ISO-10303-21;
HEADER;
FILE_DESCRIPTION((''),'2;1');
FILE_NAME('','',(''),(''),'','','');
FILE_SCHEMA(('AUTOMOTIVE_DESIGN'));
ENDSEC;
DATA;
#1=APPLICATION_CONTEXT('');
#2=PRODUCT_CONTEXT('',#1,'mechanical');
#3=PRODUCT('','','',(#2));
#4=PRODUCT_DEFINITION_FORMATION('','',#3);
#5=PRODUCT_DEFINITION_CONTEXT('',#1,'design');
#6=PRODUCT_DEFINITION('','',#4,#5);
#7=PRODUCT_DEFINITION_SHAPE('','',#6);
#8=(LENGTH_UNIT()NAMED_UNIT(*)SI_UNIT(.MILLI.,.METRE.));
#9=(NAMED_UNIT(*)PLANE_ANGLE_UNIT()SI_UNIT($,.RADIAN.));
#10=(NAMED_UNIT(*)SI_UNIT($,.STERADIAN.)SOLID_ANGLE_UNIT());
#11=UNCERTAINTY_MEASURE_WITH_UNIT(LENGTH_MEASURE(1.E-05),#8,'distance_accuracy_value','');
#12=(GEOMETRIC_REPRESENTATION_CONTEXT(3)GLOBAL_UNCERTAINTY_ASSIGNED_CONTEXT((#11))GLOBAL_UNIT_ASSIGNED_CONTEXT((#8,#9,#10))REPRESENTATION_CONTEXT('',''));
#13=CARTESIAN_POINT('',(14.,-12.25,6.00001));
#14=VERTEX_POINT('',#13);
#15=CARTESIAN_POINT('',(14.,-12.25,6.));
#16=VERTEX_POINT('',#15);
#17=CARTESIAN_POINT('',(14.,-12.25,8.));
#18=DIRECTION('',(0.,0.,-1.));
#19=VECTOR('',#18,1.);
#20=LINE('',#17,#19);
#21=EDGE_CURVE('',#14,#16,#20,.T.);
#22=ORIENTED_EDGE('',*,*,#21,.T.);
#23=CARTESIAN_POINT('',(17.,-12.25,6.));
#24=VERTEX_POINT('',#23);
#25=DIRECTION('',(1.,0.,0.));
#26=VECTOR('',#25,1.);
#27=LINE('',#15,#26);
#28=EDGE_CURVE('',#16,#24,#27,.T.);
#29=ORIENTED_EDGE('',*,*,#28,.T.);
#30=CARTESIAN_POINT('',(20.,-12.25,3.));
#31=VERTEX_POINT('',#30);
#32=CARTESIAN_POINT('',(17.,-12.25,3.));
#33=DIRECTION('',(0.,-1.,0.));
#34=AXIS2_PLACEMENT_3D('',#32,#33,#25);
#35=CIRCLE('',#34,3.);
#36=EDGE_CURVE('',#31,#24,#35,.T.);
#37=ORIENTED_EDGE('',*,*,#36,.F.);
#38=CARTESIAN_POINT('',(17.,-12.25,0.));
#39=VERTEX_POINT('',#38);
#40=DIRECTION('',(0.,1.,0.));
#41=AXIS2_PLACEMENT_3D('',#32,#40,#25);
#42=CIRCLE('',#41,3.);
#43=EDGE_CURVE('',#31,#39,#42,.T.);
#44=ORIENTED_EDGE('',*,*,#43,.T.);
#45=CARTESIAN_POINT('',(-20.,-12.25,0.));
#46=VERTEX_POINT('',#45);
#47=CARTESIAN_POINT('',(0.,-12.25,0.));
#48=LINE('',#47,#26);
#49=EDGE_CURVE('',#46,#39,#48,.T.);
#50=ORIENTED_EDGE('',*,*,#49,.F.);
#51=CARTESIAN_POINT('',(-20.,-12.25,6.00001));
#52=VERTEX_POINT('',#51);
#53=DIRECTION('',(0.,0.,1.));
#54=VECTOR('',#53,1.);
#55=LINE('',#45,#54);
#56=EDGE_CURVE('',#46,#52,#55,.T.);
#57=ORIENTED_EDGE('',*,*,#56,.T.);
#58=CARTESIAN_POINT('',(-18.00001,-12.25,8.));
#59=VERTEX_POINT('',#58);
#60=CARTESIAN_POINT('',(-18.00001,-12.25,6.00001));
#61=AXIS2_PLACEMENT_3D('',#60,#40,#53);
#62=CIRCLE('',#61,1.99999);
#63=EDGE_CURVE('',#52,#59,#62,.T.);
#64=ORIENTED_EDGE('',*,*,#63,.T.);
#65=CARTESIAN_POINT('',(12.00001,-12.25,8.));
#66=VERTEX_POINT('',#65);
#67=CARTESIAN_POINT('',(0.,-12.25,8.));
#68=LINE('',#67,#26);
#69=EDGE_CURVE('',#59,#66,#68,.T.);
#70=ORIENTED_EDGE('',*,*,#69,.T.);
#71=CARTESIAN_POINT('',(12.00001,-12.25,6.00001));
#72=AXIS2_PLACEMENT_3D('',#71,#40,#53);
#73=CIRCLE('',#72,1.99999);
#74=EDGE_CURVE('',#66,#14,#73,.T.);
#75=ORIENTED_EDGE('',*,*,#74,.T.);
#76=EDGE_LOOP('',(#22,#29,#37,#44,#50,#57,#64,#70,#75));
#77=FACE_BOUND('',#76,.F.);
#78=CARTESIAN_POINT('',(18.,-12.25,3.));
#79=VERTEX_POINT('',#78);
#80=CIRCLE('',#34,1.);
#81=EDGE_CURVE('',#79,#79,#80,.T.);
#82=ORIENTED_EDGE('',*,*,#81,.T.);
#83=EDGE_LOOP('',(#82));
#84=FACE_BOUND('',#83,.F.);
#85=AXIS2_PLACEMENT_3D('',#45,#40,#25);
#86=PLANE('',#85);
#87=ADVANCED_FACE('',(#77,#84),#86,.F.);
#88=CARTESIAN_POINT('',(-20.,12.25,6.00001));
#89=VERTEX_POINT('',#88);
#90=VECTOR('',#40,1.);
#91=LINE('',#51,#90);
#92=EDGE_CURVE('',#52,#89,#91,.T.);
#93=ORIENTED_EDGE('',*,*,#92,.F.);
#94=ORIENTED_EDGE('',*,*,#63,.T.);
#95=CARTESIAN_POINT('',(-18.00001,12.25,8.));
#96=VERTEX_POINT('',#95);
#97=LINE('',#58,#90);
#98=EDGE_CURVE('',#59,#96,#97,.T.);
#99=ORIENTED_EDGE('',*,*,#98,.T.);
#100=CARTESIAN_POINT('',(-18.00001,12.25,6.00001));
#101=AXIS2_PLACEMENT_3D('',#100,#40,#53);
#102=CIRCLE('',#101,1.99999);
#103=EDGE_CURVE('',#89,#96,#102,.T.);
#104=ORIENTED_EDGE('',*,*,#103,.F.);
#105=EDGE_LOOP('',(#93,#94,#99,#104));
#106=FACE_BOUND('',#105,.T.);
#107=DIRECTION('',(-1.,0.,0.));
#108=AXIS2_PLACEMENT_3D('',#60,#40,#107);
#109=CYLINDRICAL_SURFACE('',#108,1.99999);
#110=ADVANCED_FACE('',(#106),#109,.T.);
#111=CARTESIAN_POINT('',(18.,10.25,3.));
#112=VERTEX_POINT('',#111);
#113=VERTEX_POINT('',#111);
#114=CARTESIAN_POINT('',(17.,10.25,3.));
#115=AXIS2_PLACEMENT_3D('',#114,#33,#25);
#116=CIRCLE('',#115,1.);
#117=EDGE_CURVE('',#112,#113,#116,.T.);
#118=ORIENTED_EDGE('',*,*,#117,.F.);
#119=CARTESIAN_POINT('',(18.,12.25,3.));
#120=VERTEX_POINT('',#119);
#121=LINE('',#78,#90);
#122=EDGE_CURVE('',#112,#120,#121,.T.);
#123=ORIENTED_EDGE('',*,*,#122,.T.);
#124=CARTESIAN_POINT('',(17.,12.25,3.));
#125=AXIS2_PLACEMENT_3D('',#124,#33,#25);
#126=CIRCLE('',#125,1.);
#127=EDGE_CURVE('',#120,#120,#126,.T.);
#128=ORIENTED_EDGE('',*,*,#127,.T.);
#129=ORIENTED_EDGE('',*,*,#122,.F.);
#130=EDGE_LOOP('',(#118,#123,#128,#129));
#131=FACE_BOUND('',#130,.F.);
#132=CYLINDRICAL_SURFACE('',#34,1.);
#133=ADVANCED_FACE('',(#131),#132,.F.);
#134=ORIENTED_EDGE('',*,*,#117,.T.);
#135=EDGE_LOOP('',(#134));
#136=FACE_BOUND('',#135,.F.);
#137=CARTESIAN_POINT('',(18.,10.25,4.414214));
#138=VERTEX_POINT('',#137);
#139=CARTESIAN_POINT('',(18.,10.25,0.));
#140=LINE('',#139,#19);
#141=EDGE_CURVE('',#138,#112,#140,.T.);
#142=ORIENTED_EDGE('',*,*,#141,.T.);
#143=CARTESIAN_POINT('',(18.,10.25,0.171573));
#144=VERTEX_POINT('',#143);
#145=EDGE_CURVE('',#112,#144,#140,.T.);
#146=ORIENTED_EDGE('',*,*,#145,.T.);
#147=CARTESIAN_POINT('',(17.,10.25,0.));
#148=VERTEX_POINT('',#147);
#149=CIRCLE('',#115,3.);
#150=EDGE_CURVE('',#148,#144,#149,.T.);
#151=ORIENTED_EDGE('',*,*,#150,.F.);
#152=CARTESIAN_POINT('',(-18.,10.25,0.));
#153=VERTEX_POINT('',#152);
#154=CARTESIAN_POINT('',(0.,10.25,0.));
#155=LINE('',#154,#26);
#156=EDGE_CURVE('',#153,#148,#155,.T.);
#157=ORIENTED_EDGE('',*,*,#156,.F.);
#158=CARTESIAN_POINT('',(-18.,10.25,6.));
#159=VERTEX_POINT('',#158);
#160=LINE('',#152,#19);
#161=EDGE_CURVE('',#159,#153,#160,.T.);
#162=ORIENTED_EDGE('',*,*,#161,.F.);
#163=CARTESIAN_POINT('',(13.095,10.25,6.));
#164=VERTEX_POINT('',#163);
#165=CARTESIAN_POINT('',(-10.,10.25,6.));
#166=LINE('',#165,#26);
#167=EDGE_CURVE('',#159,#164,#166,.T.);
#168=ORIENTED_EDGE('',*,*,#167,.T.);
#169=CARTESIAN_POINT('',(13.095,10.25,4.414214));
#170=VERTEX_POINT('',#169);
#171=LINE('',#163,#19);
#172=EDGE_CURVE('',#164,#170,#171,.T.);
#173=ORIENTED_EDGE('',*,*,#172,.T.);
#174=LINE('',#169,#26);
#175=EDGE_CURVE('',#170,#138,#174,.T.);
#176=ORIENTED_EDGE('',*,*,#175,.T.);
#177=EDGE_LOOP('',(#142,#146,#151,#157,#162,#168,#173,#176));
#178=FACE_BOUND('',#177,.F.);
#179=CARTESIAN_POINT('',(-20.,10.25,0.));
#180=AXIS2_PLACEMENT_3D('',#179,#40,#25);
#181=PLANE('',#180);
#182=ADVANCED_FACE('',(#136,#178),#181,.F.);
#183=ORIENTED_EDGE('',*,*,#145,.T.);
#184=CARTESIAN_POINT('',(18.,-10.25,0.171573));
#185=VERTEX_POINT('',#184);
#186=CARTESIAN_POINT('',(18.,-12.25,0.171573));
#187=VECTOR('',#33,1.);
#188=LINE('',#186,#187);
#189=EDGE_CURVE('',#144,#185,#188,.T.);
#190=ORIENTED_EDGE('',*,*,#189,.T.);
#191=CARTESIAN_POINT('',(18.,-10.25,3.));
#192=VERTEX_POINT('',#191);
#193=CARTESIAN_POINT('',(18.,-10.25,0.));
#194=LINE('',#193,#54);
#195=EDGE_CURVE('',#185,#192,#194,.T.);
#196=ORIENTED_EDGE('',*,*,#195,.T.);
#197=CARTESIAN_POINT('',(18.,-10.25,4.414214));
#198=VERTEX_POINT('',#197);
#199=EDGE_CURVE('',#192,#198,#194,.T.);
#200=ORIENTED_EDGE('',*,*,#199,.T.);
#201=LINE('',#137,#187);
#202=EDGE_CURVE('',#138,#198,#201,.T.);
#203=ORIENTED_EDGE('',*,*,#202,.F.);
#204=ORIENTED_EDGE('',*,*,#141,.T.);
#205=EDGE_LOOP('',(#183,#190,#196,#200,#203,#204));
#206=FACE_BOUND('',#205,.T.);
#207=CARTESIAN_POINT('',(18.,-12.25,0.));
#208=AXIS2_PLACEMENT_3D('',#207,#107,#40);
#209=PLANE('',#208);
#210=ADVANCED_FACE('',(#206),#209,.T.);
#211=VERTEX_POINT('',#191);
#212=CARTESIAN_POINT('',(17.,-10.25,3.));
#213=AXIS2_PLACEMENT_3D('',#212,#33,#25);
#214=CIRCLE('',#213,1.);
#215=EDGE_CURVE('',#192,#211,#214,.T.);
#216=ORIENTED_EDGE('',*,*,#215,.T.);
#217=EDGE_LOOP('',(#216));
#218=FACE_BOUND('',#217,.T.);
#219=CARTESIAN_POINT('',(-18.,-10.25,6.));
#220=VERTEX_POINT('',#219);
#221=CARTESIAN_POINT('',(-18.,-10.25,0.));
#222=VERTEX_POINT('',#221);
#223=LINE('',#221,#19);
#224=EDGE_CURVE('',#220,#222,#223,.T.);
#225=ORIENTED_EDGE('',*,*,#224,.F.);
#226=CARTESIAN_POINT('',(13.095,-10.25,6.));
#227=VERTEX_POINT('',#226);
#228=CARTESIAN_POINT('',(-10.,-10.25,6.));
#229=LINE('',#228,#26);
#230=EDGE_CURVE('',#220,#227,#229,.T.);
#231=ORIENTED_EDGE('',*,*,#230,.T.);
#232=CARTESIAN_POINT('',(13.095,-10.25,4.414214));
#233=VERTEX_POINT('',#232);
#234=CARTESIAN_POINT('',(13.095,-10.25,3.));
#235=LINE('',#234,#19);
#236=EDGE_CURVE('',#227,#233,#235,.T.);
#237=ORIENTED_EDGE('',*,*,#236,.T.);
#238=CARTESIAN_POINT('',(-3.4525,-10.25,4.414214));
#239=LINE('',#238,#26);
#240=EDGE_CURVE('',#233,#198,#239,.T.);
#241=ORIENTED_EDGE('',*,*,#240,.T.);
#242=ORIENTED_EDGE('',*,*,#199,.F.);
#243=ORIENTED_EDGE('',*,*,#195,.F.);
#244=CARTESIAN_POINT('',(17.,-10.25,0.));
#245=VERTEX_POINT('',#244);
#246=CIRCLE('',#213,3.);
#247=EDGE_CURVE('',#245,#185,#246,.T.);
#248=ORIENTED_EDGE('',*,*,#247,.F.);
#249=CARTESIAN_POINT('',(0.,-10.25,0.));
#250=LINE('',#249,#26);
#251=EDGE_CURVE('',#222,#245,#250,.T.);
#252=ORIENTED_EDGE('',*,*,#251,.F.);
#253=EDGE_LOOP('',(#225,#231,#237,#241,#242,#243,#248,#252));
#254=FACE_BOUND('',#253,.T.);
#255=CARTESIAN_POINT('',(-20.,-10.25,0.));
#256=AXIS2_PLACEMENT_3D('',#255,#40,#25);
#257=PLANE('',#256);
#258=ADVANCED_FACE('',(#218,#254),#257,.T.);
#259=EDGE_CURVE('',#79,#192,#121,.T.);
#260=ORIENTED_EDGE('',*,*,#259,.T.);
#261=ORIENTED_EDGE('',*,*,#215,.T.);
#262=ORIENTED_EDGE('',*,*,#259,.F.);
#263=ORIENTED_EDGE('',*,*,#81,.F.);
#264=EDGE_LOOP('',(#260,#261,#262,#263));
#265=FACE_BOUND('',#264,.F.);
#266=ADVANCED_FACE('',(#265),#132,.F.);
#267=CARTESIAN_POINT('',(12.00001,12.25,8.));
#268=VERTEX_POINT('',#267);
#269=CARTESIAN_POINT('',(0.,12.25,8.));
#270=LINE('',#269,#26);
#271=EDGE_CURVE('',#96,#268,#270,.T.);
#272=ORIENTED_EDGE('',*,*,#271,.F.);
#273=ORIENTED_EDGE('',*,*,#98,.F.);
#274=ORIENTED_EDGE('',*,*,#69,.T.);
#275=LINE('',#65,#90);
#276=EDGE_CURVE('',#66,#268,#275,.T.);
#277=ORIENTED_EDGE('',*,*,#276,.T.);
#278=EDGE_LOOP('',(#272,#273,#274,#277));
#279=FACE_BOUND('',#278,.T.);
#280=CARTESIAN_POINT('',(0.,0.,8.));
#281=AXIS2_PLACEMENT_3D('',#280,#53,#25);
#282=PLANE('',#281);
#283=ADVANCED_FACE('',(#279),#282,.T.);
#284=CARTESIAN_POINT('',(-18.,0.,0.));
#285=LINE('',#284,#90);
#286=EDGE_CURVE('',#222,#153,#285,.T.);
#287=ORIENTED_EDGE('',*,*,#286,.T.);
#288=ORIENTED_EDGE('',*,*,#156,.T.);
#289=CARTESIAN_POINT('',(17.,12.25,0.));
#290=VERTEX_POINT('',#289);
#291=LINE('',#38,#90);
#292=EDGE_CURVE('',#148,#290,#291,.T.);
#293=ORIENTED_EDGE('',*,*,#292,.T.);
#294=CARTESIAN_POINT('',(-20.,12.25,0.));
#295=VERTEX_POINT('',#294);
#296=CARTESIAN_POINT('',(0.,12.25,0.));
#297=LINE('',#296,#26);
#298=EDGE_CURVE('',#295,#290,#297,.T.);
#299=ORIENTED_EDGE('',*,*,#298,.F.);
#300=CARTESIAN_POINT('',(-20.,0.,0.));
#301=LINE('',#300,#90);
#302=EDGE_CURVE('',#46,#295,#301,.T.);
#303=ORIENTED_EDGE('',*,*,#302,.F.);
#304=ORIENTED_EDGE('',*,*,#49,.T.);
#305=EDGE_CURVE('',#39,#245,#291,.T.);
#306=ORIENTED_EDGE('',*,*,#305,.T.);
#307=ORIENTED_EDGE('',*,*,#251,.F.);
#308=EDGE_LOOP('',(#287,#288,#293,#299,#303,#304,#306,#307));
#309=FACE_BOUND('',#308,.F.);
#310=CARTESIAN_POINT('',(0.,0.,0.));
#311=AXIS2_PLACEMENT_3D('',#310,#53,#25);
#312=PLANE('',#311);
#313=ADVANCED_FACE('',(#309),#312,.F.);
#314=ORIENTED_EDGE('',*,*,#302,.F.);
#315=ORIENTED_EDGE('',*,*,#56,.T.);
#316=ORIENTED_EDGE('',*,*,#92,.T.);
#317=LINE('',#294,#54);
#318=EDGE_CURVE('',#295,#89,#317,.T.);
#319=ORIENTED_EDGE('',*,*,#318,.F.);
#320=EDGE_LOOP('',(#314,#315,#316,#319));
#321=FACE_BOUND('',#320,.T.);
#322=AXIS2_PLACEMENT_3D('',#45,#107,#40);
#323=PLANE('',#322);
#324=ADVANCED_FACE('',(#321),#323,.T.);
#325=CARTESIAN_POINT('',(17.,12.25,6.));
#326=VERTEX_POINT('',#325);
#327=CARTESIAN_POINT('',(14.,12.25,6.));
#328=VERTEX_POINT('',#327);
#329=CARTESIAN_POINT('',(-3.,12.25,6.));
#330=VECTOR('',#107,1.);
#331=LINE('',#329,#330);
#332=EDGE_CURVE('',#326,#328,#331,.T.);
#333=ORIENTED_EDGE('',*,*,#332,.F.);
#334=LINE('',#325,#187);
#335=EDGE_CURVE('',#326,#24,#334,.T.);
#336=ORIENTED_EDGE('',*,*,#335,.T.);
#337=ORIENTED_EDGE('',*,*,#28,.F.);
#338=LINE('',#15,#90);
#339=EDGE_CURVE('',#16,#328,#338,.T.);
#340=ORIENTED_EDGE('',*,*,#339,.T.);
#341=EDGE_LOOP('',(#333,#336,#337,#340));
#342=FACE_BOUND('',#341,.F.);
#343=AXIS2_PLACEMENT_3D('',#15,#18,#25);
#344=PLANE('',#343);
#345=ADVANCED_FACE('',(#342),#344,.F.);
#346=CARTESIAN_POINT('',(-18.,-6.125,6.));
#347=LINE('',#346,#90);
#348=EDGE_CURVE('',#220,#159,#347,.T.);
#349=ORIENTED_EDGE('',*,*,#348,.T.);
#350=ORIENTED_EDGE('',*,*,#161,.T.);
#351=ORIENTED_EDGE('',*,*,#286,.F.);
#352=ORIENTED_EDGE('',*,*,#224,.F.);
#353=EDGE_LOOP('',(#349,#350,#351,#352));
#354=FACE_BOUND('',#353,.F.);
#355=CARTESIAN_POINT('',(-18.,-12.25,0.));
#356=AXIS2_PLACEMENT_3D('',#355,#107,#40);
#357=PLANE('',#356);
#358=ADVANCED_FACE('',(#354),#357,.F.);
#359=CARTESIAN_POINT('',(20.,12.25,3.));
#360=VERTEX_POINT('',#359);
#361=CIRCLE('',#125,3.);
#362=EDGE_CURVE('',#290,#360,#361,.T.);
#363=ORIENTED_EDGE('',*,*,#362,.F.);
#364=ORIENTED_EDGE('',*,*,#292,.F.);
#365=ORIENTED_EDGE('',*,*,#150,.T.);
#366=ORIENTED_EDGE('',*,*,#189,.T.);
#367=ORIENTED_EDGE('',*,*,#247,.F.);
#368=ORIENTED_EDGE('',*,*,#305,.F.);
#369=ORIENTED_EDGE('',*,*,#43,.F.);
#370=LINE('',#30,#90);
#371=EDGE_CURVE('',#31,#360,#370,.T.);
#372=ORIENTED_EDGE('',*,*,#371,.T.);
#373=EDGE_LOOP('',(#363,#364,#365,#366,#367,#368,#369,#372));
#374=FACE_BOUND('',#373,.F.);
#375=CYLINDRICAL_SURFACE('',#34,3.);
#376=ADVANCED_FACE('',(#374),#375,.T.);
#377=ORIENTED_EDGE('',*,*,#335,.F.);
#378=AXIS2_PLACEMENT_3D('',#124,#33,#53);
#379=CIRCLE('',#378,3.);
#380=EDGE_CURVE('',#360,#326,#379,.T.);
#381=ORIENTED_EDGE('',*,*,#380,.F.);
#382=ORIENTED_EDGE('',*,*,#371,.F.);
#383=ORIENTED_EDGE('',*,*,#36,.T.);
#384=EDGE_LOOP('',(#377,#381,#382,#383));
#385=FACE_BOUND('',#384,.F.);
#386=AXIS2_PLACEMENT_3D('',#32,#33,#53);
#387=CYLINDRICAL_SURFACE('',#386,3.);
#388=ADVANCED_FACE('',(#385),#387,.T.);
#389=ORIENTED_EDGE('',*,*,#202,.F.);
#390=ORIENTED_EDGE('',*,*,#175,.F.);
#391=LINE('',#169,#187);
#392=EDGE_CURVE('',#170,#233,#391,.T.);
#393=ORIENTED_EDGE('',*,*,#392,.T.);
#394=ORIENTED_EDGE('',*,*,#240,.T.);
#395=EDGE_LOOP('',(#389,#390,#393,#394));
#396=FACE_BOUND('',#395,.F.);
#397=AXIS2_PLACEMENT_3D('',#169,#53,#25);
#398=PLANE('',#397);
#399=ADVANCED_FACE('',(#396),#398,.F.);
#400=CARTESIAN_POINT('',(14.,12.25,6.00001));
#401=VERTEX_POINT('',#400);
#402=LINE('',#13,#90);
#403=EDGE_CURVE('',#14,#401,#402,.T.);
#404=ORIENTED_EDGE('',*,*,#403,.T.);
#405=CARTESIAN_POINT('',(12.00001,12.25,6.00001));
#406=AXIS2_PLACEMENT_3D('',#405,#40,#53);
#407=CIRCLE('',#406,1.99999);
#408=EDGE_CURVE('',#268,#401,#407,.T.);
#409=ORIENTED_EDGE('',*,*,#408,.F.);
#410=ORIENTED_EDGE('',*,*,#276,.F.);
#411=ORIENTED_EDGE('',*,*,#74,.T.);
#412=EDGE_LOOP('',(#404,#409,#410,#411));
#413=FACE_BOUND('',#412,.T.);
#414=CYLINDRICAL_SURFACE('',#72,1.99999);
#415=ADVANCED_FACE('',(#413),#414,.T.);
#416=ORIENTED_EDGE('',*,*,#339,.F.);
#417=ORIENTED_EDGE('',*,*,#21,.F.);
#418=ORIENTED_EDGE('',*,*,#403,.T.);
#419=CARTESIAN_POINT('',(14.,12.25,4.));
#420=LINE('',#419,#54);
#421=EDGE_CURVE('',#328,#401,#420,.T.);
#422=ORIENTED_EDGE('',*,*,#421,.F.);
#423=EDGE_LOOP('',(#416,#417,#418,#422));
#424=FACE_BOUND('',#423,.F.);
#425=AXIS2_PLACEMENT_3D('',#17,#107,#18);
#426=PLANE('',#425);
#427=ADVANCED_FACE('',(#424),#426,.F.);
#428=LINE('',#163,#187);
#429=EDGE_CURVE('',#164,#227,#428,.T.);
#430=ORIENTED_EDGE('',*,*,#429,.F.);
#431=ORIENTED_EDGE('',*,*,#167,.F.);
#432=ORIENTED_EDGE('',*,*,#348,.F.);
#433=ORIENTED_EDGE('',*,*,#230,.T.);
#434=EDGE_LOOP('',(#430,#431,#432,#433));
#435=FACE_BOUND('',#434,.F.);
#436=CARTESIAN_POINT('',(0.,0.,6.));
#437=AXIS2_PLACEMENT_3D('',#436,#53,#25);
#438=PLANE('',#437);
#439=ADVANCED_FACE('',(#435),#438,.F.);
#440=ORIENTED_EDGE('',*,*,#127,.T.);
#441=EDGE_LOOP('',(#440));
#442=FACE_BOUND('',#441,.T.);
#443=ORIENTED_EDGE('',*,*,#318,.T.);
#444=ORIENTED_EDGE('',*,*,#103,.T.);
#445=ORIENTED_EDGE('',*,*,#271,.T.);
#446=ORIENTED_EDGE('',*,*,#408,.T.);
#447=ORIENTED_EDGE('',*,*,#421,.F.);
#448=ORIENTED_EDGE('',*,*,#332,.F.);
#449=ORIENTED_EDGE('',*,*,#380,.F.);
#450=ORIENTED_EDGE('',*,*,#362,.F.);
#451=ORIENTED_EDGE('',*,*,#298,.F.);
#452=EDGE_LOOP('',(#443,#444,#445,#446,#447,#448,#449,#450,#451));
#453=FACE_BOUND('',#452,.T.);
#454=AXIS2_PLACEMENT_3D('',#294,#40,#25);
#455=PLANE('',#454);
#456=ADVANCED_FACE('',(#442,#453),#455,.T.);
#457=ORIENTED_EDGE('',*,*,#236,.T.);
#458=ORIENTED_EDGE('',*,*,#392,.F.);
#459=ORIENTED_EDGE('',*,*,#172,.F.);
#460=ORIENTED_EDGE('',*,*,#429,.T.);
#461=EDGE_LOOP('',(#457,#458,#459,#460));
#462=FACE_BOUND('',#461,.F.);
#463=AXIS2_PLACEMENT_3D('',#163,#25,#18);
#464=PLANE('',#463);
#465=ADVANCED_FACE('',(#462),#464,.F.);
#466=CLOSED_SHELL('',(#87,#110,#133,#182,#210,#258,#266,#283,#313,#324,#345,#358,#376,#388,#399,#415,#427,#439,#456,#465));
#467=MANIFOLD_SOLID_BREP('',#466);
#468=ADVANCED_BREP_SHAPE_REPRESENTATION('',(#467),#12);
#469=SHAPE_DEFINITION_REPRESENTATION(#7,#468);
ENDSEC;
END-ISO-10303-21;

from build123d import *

# Parameters (mm, degrees)
F0_W     = 40
F0_H     = 24.5
F1_DEPTH = 8
F2_T     = -2
F3_R     = 1
F4_DEPTH = 25
F5_R     = 1.99999
F7_DEPTH = 22.5


# Not quite as in the source:
# - a fillet or chamfer is up to 0.001 mm smaller than in the source, because OpenCascade refuses the exact size


with BuildPart() as f1:
    # F0 (on Top) → F1 (new body)
    with BuildSketch(Plane.XY):
        Rectangle(F0_W, F0_H)
    extrude(amount=F1_DEPTH)

    # F2
    f2_openings = [f1.faces().sort_by_distance(p)[0] for p in [
        (0, 0, 0),
    ]]
    offset(amount=F2_T, openings=f2_openings)

    # F3 (on face) → F4 (cut)
    with BuildSketch(Plane.XZ.offset(12.25)):
        with Locations((17, 3)):
            Circle(F3_R)
        with BuildLine():
            ThreePointArc((17, 6), (19.1213203436, 5.1213203436), (20, 3))
            Line((20, 3), (20, 8))
            Line((20, 8), (14, 8))
            Line((14, 8), (14, 6))
            Line((14, 6), (17, 6))
        make_face()
        with BuildLine():
            ThreePointArc((20, 3), (19.1213203436, 0.8786796564), (17, 0))
            Line((17, 0), (20, 0))
            Line((20, 0), (20, 3))
        make_face()
    extrude(amount=-F4_DEPTH, mode=Mode.SUBTRACT)

    # F5 (radius 2 in the source; OpenCascade refuses exactly that, so slightly less here)
    f5_edges = [f1.edges().sort_by_distance(p)[0] for p in [
        (-20, 0, 8),
        (14, 0, 8),
    ]]
    fillet(f5_edges, radius=F5_R)

    # F6 (on face) → F7 (join)
    with BuildSketch(Plane.XZ.offset(-10.25)):
        with BuildLine():
            Line((14, 6), (13.095, 6))
            Line((13.095, 6), (13.095, 4.4142135624))
            Line((13.095, 4.4142135624), (18, 4.4142135624))
            Line((18, 4.4142135624), (18, 5.8284271247))
            ThreePointArc((18, 5.8284271247), (17.5073059362, 5.956795679), (17, 6))
            Line((17, 6), (14, 6))
        make_face()
    extrude(amount=F7_DEPTH)


solid = f1.part
